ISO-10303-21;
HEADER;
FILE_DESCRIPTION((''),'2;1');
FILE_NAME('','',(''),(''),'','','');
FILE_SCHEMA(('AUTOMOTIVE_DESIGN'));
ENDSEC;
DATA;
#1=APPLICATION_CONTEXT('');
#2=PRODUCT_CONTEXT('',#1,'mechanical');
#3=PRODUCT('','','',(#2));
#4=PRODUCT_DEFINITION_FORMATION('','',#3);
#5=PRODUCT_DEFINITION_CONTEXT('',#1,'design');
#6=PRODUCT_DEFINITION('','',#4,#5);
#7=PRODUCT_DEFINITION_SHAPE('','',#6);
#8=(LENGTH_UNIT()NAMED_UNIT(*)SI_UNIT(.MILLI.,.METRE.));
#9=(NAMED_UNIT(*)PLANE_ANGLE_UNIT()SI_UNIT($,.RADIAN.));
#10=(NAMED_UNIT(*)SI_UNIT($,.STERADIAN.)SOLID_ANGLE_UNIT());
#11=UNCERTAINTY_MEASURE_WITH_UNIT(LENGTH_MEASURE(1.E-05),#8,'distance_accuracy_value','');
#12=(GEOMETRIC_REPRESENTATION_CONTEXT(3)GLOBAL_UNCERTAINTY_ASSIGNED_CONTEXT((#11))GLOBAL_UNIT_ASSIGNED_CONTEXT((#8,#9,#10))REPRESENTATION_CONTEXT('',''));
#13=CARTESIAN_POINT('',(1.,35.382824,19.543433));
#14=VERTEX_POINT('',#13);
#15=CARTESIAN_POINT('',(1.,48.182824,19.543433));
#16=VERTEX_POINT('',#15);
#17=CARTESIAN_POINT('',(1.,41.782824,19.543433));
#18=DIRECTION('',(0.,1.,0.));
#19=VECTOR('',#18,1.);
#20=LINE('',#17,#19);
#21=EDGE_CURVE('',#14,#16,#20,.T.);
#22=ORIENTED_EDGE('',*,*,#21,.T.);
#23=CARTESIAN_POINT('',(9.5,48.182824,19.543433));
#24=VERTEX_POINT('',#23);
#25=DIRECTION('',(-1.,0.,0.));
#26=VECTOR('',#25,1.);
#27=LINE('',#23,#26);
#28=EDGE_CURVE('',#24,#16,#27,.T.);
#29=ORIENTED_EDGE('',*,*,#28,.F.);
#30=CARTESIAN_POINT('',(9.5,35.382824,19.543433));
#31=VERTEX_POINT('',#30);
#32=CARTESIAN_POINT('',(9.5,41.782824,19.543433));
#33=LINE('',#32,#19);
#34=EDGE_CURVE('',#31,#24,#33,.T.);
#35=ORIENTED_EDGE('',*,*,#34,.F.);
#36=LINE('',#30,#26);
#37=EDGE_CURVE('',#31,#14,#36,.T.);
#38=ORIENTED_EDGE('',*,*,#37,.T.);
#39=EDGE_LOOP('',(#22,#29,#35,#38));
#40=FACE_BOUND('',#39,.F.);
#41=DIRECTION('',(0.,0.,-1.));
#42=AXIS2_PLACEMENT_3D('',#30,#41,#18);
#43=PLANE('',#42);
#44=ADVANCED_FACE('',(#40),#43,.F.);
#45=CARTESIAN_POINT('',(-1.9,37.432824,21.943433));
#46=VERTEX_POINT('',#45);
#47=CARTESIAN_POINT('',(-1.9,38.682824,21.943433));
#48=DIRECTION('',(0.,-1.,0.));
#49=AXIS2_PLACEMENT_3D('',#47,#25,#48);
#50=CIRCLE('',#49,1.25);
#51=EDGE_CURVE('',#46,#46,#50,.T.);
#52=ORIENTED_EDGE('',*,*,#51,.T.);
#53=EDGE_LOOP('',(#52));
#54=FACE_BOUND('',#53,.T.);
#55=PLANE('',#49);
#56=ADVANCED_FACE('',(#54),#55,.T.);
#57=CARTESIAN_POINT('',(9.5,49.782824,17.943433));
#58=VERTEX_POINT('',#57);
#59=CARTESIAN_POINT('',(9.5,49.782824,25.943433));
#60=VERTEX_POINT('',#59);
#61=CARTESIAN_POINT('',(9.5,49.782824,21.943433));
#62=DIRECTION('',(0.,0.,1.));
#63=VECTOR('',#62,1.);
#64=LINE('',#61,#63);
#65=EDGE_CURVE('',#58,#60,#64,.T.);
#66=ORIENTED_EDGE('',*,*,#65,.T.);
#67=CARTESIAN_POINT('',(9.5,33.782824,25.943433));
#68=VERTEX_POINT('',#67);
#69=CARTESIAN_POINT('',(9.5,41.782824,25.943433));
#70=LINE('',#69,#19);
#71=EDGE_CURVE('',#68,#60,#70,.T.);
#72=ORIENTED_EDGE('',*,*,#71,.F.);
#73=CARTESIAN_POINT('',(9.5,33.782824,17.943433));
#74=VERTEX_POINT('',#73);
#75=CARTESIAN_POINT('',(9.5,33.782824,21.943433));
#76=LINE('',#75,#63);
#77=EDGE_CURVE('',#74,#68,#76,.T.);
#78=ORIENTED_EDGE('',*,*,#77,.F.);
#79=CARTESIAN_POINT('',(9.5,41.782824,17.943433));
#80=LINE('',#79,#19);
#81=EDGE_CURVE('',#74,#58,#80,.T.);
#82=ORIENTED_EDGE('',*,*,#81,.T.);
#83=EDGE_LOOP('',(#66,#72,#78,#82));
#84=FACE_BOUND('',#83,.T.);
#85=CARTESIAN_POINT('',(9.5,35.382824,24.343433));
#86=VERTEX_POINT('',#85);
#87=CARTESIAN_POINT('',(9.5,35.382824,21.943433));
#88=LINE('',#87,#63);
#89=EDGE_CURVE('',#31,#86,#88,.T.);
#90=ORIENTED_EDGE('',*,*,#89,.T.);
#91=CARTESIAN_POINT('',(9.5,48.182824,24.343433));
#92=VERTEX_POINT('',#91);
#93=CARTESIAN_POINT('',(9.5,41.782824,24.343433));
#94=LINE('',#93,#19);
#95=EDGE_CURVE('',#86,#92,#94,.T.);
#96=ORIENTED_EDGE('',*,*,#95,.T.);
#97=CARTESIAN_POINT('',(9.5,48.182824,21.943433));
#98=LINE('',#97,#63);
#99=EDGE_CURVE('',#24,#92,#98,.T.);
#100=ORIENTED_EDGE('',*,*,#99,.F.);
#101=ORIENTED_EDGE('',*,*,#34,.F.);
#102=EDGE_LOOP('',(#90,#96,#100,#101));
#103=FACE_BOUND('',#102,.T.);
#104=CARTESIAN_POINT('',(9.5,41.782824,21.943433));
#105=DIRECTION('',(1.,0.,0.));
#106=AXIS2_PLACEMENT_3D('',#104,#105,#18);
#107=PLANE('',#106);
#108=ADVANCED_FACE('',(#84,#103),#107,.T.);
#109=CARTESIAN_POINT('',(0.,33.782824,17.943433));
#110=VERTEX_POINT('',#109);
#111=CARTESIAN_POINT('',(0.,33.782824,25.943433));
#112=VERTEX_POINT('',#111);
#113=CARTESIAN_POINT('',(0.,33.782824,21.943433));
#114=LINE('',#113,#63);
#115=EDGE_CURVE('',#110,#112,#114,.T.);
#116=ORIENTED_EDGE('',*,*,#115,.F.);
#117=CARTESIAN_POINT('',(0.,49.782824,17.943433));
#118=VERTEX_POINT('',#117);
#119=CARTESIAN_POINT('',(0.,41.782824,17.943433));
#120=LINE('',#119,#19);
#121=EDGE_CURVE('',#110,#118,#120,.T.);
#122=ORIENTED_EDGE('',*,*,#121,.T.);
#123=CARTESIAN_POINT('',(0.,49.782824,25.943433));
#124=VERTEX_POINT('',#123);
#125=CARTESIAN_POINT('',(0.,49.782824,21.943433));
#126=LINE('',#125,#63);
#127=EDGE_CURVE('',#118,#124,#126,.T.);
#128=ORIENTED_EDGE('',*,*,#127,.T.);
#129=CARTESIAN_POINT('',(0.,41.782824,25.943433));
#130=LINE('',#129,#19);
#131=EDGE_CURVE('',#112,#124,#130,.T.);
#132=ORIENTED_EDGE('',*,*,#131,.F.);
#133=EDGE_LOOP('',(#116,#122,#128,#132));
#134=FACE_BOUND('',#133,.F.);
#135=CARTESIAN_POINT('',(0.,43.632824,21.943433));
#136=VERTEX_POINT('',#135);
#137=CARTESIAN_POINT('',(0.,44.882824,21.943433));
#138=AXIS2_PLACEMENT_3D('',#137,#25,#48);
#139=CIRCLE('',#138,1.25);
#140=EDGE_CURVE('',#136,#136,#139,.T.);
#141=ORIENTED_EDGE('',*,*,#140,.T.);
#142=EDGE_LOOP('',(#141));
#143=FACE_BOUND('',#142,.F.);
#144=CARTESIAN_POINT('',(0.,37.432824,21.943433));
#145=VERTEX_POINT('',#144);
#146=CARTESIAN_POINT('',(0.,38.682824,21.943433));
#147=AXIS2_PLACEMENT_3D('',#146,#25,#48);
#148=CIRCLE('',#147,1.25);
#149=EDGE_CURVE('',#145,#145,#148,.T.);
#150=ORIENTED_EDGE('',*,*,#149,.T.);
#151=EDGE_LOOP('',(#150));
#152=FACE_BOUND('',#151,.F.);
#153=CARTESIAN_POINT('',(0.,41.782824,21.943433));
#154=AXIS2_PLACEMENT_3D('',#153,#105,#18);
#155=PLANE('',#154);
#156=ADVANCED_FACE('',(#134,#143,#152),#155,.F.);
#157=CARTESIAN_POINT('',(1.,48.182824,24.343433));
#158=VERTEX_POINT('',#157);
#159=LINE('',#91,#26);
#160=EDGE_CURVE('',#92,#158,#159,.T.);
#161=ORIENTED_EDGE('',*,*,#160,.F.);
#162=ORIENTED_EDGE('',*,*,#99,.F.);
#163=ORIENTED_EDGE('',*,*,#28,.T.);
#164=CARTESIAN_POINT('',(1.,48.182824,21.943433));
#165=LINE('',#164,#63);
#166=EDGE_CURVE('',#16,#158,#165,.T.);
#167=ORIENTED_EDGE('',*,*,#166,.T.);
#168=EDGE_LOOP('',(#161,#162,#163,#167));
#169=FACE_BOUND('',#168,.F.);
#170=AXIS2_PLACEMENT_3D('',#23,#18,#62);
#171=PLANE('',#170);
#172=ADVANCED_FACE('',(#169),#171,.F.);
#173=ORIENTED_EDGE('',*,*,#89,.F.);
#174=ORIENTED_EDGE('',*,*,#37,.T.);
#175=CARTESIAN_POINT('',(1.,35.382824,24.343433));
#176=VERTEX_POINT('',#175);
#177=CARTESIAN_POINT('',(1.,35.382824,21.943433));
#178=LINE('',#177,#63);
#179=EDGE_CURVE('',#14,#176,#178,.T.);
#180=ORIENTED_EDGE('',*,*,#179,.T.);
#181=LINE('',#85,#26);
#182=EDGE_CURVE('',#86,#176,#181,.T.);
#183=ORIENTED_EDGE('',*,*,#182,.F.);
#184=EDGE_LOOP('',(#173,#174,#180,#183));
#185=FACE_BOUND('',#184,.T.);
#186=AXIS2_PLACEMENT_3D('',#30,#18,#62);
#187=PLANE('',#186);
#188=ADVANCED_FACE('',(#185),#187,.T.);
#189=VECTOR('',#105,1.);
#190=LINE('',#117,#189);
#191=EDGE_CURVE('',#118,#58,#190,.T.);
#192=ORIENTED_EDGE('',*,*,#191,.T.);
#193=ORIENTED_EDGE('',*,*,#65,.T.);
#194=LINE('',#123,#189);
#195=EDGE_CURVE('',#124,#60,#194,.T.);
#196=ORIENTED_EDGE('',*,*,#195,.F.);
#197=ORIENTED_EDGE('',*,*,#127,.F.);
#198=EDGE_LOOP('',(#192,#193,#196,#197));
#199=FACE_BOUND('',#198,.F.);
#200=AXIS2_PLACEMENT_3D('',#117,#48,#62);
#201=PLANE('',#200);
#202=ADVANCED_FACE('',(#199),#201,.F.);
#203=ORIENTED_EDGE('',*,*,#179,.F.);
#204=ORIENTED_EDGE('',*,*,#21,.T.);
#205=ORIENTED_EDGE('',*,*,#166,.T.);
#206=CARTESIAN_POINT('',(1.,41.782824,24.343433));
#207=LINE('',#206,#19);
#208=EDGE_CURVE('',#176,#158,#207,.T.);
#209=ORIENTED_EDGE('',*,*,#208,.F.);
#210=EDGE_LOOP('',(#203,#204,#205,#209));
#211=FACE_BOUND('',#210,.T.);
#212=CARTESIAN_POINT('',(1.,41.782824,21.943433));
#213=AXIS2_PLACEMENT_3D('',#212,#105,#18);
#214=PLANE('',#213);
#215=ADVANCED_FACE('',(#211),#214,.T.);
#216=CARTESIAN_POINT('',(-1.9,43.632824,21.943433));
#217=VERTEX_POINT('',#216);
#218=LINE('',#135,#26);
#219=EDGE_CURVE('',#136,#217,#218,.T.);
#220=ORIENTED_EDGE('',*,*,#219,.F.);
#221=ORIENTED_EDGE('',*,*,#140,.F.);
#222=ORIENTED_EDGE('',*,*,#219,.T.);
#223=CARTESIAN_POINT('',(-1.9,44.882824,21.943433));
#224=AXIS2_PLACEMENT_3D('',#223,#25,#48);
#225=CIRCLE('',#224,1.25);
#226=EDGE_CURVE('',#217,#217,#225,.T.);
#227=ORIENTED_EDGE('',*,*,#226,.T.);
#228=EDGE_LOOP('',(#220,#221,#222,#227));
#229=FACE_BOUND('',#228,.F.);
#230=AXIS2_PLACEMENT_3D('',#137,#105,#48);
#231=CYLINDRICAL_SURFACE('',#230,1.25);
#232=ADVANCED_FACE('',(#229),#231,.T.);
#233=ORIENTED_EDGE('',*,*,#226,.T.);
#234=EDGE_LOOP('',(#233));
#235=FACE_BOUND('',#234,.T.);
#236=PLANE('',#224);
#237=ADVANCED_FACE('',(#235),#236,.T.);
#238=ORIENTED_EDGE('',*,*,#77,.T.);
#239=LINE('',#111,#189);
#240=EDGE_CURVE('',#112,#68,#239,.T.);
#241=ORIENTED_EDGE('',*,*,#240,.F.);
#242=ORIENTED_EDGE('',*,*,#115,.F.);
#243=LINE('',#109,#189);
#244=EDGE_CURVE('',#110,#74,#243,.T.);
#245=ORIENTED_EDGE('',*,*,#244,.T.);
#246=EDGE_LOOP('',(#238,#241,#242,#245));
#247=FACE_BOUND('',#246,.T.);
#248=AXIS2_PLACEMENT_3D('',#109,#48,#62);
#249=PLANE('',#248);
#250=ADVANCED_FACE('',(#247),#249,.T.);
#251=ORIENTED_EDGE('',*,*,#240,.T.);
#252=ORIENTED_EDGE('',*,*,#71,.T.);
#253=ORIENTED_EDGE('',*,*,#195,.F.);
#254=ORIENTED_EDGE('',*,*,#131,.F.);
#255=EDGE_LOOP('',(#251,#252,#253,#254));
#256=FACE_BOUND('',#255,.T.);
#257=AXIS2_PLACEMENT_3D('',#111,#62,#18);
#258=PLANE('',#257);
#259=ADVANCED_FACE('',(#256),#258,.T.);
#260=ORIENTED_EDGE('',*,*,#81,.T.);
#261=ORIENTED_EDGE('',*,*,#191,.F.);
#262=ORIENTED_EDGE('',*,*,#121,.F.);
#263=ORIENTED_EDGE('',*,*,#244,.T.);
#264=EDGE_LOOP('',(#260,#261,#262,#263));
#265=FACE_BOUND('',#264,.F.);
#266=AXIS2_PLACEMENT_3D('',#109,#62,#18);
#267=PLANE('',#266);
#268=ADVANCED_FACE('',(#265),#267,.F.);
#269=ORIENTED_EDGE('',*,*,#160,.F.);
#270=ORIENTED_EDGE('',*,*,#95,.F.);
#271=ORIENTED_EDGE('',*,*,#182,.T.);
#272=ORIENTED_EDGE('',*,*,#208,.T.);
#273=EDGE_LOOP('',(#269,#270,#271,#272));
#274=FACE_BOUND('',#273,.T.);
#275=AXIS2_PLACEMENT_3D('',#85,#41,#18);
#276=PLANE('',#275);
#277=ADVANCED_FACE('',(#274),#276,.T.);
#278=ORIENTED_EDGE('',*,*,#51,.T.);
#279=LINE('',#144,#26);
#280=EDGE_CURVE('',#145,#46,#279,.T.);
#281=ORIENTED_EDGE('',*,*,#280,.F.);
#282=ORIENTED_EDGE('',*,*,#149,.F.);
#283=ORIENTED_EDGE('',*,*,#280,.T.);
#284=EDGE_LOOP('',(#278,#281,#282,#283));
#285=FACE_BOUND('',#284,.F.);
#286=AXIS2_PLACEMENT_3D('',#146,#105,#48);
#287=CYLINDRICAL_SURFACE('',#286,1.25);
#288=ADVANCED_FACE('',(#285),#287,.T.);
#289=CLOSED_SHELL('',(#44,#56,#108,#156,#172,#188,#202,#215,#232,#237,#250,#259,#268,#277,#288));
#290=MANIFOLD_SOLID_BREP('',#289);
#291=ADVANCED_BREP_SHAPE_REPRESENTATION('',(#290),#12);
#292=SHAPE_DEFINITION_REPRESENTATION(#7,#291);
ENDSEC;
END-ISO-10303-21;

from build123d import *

# Parameters (mm, degrees)
F0_W     = 16
F0_H     = 8
F1_DEPTH = 9.5
F2_R     = 1.25
F3_DEPTH = 1.9
F4_W     = 12.8
F4_H     = 4.8
F6_DEPTH = 8.5


# Not quite as in the source:
# - a feature names something its author has since deleted; it is built from what else it names


with BuildPart() as f1:
    # F0 (on Right) → F1 (new body)
    with BuildSketch(Plane.YZ):
        with Locations((41.7828243226, 21.9434328547)):
            Rectangle(F0_W, F0_H)
    extrude(amount=F1_DEPTH)

    # F2 (on face) → F3 (join)
    with BuildSketch(Plane(origin=(0, 0, 0), x_dir=(0, -1, 0), z_dir=(-1, 0, 0))):
        with Locations((-44.8828243226, 21.9434328547)):
            Circle(F2_R)
        with Locations((-38.6828243226, 21.9434328547)):
            Circle(F2_R)
    extrude(amount=F3_DEPTH)

    # F4 (on face) → F6 (cut)
    with BuildSketch(Plane.YZ.offset(9.5)):
        with Locations((41.7828243226, 21.9434328547)):
            Rectangle(F4_W, F4_H)
    extrude(amount=-F6_DEPTH, mode=Mode.SUBTRACT)


solid = f1.part
